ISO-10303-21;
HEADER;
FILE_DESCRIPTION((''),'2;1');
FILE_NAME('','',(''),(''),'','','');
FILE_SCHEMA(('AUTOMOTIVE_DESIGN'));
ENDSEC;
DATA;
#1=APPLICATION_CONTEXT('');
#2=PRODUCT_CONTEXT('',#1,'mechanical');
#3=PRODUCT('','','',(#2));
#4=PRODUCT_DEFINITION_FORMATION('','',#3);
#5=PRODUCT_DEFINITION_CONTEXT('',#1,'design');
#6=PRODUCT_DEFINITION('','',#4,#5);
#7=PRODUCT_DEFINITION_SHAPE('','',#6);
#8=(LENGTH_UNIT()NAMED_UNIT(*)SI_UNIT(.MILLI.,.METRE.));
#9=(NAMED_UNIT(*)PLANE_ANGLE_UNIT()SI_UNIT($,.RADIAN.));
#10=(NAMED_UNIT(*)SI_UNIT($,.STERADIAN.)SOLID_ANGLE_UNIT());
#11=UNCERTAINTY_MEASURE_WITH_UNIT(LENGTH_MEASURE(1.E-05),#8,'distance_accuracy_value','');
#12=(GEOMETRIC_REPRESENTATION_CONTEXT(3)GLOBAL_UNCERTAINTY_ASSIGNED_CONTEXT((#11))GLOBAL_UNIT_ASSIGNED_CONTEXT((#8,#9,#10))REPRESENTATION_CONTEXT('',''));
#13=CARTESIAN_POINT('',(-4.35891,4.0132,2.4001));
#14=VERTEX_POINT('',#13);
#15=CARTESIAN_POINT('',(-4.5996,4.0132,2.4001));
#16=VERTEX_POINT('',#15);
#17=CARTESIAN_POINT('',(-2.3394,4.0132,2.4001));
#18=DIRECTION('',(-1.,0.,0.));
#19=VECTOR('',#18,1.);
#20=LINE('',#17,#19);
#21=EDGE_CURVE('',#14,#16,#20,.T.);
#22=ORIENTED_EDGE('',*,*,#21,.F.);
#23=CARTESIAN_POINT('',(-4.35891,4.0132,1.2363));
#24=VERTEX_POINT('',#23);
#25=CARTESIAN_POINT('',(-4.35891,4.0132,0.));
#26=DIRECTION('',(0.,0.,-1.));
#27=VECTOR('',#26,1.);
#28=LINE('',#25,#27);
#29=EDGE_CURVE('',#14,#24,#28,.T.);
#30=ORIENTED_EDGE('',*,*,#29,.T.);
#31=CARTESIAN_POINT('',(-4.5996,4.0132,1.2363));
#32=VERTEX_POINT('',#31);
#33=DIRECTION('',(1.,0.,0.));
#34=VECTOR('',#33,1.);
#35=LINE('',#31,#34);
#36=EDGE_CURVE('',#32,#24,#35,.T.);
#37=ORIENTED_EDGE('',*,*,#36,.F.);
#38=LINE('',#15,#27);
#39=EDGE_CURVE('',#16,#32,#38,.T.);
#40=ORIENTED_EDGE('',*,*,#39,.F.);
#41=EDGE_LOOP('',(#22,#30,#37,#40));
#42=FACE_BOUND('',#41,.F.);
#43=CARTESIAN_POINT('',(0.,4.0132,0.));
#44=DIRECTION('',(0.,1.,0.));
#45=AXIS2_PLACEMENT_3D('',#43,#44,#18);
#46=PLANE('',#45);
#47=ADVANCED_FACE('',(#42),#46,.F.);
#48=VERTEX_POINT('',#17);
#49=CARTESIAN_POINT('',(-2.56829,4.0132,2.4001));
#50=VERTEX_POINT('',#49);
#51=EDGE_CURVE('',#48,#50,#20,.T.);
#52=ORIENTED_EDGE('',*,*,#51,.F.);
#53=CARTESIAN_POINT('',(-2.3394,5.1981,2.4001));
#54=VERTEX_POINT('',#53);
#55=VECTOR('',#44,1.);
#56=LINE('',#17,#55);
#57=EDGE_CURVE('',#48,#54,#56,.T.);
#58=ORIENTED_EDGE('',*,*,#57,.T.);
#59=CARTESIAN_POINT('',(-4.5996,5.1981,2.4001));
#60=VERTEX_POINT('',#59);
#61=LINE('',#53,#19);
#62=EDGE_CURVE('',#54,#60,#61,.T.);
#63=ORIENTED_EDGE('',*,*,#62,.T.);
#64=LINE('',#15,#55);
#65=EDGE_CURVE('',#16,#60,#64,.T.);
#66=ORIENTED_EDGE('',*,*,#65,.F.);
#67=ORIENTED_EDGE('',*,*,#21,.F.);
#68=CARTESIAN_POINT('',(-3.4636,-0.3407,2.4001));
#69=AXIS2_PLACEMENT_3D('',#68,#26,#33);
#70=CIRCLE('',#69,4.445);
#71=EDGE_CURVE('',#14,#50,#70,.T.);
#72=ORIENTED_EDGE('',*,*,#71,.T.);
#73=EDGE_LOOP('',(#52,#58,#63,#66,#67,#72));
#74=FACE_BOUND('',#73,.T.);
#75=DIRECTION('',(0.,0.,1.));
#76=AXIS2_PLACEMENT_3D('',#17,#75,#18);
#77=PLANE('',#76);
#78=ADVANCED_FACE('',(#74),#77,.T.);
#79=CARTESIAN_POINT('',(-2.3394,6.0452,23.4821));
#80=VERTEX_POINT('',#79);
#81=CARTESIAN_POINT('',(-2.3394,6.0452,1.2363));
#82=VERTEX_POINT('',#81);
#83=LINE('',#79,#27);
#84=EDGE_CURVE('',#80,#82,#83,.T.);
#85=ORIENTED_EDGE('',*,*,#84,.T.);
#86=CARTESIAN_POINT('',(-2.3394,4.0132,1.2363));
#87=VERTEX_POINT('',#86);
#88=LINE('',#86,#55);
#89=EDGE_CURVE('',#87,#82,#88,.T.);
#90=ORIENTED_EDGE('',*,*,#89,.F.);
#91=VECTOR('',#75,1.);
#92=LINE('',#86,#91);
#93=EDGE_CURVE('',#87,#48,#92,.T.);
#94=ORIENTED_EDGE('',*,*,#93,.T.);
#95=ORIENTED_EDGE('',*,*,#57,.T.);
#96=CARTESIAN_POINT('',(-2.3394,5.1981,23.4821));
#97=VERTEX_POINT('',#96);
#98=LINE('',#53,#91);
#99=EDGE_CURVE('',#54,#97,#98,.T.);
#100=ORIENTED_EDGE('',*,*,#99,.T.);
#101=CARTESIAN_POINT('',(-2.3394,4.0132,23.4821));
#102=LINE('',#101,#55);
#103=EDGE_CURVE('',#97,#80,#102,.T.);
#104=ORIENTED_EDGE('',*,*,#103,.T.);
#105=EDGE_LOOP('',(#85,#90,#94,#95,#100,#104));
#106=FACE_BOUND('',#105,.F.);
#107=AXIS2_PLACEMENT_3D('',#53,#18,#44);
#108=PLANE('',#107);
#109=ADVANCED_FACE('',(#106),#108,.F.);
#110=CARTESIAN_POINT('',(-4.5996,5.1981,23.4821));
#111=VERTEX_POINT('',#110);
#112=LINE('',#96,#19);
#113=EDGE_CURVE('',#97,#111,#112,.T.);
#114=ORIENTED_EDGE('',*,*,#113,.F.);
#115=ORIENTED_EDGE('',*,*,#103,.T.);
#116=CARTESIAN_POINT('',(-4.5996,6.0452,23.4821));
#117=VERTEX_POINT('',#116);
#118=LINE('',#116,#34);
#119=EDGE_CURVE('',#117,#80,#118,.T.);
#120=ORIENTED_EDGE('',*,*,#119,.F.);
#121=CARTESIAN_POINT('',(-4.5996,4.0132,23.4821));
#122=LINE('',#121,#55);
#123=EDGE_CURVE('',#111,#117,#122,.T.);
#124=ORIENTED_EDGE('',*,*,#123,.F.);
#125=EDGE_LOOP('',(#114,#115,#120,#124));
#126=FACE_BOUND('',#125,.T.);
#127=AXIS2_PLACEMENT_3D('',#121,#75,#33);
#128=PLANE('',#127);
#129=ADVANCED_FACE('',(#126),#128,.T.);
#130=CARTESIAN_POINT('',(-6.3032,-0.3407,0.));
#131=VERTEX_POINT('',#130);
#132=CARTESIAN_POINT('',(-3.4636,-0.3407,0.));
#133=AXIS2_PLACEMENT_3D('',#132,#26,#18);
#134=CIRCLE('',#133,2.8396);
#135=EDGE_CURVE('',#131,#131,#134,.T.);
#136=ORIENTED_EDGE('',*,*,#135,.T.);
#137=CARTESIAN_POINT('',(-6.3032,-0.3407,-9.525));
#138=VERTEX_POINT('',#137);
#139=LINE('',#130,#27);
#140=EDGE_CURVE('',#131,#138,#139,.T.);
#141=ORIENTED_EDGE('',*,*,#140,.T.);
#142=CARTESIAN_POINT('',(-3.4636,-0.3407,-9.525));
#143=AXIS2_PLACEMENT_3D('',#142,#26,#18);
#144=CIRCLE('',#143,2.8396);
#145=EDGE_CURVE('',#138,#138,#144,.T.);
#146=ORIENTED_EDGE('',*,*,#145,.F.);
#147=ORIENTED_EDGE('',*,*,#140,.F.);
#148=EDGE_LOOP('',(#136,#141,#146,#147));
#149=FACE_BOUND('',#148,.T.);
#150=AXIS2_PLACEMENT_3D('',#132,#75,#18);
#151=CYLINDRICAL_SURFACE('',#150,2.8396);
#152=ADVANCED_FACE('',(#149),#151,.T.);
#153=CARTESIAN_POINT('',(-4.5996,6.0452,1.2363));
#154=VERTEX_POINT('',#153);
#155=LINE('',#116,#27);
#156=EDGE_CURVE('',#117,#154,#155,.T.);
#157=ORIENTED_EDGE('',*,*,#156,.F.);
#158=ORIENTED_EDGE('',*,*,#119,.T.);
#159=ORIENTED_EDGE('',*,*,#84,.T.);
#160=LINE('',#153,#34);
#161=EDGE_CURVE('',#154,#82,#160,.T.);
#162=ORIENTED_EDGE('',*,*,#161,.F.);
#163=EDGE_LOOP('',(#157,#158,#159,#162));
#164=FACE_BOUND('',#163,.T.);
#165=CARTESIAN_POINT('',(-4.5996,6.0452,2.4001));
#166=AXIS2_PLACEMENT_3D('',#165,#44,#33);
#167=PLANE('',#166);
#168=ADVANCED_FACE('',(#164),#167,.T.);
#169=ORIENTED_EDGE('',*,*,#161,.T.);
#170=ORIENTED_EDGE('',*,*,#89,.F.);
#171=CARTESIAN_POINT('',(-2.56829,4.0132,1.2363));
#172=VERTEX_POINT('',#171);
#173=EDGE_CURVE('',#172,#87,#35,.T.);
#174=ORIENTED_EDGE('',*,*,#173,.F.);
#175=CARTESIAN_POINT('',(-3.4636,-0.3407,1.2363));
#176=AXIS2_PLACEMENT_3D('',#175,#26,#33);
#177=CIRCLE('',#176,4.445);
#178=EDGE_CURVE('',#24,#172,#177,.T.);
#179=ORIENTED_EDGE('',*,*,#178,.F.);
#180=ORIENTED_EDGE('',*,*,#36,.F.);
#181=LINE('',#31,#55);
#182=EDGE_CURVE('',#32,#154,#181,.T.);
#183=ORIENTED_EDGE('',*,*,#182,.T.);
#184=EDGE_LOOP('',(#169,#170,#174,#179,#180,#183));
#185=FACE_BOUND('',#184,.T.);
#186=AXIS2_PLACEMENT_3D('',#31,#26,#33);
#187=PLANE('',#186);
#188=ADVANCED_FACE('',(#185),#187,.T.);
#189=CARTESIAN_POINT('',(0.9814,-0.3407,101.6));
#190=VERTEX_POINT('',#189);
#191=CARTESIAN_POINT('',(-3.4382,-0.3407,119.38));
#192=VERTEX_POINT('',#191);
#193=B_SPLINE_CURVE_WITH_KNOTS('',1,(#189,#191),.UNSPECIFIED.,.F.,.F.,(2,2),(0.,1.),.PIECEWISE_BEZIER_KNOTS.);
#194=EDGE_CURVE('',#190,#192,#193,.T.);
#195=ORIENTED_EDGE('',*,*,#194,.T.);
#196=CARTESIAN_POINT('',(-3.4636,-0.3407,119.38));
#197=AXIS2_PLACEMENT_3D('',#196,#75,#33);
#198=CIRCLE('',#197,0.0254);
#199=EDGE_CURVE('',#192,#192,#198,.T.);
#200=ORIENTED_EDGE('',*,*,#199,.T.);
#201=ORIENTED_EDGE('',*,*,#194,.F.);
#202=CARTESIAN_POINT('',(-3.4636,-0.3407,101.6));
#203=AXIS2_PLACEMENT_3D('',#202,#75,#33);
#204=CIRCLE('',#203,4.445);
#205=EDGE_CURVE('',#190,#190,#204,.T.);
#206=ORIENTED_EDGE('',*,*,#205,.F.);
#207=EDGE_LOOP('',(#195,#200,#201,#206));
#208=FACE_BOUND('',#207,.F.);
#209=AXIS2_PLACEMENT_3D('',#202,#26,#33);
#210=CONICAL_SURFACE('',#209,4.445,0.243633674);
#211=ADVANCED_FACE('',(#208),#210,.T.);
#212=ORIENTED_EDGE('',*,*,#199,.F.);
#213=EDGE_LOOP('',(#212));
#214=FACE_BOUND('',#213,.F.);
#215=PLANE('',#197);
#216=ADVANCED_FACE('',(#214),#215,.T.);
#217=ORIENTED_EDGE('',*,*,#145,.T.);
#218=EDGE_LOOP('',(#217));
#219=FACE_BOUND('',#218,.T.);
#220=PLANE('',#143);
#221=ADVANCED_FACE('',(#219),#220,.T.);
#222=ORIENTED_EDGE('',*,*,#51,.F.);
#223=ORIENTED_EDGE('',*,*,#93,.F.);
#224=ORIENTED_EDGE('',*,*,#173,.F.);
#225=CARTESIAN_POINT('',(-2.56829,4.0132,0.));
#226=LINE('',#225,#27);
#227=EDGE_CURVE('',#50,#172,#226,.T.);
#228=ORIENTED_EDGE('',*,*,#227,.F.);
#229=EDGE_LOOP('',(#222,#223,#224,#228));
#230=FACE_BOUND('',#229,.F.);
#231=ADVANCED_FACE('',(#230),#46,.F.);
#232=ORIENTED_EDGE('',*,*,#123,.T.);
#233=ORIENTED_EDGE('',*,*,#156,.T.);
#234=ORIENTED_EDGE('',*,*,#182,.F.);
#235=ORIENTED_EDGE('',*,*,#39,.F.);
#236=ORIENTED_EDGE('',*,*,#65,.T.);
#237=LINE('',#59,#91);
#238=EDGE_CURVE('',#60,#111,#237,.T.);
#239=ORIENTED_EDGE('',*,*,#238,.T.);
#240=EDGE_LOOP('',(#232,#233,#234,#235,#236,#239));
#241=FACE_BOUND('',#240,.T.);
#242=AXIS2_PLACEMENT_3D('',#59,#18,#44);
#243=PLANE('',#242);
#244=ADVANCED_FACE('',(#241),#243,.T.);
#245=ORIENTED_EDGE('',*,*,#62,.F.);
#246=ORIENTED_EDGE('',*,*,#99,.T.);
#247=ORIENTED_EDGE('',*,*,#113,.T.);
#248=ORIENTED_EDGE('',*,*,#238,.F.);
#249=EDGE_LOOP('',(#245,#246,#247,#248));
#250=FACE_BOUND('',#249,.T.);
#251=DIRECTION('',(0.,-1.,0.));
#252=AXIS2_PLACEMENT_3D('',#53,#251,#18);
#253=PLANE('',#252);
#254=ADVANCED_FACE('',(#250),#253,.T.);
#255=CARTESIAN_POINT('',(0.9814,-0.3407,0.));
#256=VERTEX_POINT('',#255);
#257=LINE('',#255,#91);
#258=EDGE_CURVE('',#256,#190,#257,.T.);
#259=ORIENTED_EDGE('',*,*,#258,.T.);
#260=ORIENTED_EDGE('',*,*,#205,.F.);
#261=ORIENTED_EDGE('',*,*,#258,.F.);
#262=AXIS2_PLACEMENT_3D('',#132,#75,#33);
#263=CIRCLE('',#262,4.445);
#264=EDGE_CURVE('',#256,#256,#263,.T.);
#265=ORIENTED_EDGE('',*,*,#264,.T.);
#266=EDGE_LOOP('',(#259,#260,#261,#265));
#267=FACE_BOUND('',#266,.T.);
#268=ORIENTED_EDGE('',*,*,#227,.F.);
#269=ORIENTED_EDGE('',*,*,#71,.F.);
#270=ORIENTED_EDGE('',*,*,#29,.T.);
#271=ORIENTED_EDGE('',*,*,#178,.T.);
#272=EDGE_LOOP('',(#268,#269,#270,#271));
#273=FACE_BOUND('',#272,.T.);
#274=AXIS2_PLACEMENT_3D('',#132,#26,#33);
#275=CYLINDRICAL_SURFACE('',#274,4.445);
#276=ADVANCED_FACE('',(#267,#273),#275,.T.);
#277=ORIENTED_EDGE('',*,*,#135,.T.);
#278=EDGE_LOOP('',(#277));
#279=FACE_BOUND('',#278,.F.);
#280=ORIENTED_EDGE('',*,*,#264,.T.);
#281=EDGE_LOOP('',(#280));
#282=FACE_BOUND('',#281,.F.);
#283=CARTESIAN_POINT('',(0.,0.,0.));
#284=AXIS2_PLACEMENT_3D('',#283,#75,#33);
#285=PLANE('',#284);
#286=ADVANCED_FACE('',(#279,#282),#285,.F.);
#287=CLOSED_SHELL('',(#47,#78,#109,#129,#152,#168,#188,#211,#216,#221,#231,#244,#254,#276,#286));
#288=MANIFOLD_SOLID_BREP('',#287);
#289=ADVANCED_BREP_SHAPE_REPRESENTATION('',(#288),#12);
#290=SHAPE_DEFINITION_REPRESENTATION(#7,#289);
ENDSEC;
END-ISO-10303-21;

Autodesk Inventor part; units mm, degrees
ref_plane "YZ Plane" through (0, 0, 0) normal (1, 0, 0) x (0, 1, 0)
sketch "Sketch1" plane through (0, 0, 0) normal (0, 0, 1) x (1, 0, 0)
  circle A0 centre (-3.4636, -0.3407) radius 4.445
  point P0 (0, 0)
  dimension "d0" = 8.89
extrude "Pen body" add sketch "Sketch1" along normal blind 101.6
ref_plane "Tip Plane" through (-3.4636, -0.3407, 119.38) normal (0, 0, 1) x (1, 0, 0)
sketch "Sketch2" plane through (-3.4636, -0.3407, 119.38) normal (0, 0, 1) x (1, 0, 0)
  circle A0 centre (0, 0) radius 0.0254
  point P0 (3.4636, 0.3407)
  dimension "d4" = 0.0508
loft "Body to Tip" add profiles "Sketch2" section 1 edges at (-7.9086, -0.3407, 101.6)
sketch "Sketch3" plane through (-3.4636, -0.3407, 0) normal (0, 0, -1) x (-1, 0, 0)
  point P0 (-3.4636, 0.3407)
sketch "Sketch4" plane through (-3.4636, -0.3407, 0) normal (0, 0, -1) x (-1, 0, 0)
  circle A0 centre (0, 0) radius 2.8396
  point P0 (-3.4636, 0.3407)
extrude "Click" add sketch "Sketch4" along normal blind 9.525
ref_plane "Clip" through (0, 4.0132, 0) normal (0, 1, 0) x (-1, 0, 0)
sketch "Clip extention" plane through (0, 4.0132, 0) normal (0, 1, 0) x (-1, 0, 0)
  point P0 (0, 0)
sketch "Clips extension's extension" plane through (0, 4.0132, 0) normal (0, 1, 0) x (-1, 0, 0)
  point P0 (0, 0)
sketch "Sketch7" plane through (0, 4.0132, 0) normal (0, 1, 0) x (-1, 0, 0)
  line L0 (4.5996, 1.2363) -> (2.3394, 1.2363)
  line L1 (2.3394, 1.2363) -> (2.3394, 2.4001)
  line L2 (2.3394, 2.4001) -> (4.5996, 2.4001)
  line L3 (4.5996, 2.4001) -> (4.5996, 1.2363)
  point P0 (0, 0)
extrude "Extrusion3" add sketch "Sketch7" along normal blind 2.032
sketch "Sketch8" plane through (-4.5996, 4.0132, 2.4001) normal (0, 0, 1) x (1, 0, 0)
  line L0 (0, 0) -> (0, 2.032) projected
  line L1 (2.2602, 0) -> (2.2602, 2.032) projected
  line L2 (0, 2.032) -> (2.2602, 2.032)
  line L3 (2.2602, 2.032) -> (2.2602, 1.1849)
  line L4 (2.2602, 1.1849) -> (0, 1.1849)
  line L5 (0, 1.1849) -> (0, 2.032)
  point P0 (4.5996, -4.0132)
extrude "Extrusion4" add sketch "Sketch8" along normal blind 21.082
properties part number "Pen"
